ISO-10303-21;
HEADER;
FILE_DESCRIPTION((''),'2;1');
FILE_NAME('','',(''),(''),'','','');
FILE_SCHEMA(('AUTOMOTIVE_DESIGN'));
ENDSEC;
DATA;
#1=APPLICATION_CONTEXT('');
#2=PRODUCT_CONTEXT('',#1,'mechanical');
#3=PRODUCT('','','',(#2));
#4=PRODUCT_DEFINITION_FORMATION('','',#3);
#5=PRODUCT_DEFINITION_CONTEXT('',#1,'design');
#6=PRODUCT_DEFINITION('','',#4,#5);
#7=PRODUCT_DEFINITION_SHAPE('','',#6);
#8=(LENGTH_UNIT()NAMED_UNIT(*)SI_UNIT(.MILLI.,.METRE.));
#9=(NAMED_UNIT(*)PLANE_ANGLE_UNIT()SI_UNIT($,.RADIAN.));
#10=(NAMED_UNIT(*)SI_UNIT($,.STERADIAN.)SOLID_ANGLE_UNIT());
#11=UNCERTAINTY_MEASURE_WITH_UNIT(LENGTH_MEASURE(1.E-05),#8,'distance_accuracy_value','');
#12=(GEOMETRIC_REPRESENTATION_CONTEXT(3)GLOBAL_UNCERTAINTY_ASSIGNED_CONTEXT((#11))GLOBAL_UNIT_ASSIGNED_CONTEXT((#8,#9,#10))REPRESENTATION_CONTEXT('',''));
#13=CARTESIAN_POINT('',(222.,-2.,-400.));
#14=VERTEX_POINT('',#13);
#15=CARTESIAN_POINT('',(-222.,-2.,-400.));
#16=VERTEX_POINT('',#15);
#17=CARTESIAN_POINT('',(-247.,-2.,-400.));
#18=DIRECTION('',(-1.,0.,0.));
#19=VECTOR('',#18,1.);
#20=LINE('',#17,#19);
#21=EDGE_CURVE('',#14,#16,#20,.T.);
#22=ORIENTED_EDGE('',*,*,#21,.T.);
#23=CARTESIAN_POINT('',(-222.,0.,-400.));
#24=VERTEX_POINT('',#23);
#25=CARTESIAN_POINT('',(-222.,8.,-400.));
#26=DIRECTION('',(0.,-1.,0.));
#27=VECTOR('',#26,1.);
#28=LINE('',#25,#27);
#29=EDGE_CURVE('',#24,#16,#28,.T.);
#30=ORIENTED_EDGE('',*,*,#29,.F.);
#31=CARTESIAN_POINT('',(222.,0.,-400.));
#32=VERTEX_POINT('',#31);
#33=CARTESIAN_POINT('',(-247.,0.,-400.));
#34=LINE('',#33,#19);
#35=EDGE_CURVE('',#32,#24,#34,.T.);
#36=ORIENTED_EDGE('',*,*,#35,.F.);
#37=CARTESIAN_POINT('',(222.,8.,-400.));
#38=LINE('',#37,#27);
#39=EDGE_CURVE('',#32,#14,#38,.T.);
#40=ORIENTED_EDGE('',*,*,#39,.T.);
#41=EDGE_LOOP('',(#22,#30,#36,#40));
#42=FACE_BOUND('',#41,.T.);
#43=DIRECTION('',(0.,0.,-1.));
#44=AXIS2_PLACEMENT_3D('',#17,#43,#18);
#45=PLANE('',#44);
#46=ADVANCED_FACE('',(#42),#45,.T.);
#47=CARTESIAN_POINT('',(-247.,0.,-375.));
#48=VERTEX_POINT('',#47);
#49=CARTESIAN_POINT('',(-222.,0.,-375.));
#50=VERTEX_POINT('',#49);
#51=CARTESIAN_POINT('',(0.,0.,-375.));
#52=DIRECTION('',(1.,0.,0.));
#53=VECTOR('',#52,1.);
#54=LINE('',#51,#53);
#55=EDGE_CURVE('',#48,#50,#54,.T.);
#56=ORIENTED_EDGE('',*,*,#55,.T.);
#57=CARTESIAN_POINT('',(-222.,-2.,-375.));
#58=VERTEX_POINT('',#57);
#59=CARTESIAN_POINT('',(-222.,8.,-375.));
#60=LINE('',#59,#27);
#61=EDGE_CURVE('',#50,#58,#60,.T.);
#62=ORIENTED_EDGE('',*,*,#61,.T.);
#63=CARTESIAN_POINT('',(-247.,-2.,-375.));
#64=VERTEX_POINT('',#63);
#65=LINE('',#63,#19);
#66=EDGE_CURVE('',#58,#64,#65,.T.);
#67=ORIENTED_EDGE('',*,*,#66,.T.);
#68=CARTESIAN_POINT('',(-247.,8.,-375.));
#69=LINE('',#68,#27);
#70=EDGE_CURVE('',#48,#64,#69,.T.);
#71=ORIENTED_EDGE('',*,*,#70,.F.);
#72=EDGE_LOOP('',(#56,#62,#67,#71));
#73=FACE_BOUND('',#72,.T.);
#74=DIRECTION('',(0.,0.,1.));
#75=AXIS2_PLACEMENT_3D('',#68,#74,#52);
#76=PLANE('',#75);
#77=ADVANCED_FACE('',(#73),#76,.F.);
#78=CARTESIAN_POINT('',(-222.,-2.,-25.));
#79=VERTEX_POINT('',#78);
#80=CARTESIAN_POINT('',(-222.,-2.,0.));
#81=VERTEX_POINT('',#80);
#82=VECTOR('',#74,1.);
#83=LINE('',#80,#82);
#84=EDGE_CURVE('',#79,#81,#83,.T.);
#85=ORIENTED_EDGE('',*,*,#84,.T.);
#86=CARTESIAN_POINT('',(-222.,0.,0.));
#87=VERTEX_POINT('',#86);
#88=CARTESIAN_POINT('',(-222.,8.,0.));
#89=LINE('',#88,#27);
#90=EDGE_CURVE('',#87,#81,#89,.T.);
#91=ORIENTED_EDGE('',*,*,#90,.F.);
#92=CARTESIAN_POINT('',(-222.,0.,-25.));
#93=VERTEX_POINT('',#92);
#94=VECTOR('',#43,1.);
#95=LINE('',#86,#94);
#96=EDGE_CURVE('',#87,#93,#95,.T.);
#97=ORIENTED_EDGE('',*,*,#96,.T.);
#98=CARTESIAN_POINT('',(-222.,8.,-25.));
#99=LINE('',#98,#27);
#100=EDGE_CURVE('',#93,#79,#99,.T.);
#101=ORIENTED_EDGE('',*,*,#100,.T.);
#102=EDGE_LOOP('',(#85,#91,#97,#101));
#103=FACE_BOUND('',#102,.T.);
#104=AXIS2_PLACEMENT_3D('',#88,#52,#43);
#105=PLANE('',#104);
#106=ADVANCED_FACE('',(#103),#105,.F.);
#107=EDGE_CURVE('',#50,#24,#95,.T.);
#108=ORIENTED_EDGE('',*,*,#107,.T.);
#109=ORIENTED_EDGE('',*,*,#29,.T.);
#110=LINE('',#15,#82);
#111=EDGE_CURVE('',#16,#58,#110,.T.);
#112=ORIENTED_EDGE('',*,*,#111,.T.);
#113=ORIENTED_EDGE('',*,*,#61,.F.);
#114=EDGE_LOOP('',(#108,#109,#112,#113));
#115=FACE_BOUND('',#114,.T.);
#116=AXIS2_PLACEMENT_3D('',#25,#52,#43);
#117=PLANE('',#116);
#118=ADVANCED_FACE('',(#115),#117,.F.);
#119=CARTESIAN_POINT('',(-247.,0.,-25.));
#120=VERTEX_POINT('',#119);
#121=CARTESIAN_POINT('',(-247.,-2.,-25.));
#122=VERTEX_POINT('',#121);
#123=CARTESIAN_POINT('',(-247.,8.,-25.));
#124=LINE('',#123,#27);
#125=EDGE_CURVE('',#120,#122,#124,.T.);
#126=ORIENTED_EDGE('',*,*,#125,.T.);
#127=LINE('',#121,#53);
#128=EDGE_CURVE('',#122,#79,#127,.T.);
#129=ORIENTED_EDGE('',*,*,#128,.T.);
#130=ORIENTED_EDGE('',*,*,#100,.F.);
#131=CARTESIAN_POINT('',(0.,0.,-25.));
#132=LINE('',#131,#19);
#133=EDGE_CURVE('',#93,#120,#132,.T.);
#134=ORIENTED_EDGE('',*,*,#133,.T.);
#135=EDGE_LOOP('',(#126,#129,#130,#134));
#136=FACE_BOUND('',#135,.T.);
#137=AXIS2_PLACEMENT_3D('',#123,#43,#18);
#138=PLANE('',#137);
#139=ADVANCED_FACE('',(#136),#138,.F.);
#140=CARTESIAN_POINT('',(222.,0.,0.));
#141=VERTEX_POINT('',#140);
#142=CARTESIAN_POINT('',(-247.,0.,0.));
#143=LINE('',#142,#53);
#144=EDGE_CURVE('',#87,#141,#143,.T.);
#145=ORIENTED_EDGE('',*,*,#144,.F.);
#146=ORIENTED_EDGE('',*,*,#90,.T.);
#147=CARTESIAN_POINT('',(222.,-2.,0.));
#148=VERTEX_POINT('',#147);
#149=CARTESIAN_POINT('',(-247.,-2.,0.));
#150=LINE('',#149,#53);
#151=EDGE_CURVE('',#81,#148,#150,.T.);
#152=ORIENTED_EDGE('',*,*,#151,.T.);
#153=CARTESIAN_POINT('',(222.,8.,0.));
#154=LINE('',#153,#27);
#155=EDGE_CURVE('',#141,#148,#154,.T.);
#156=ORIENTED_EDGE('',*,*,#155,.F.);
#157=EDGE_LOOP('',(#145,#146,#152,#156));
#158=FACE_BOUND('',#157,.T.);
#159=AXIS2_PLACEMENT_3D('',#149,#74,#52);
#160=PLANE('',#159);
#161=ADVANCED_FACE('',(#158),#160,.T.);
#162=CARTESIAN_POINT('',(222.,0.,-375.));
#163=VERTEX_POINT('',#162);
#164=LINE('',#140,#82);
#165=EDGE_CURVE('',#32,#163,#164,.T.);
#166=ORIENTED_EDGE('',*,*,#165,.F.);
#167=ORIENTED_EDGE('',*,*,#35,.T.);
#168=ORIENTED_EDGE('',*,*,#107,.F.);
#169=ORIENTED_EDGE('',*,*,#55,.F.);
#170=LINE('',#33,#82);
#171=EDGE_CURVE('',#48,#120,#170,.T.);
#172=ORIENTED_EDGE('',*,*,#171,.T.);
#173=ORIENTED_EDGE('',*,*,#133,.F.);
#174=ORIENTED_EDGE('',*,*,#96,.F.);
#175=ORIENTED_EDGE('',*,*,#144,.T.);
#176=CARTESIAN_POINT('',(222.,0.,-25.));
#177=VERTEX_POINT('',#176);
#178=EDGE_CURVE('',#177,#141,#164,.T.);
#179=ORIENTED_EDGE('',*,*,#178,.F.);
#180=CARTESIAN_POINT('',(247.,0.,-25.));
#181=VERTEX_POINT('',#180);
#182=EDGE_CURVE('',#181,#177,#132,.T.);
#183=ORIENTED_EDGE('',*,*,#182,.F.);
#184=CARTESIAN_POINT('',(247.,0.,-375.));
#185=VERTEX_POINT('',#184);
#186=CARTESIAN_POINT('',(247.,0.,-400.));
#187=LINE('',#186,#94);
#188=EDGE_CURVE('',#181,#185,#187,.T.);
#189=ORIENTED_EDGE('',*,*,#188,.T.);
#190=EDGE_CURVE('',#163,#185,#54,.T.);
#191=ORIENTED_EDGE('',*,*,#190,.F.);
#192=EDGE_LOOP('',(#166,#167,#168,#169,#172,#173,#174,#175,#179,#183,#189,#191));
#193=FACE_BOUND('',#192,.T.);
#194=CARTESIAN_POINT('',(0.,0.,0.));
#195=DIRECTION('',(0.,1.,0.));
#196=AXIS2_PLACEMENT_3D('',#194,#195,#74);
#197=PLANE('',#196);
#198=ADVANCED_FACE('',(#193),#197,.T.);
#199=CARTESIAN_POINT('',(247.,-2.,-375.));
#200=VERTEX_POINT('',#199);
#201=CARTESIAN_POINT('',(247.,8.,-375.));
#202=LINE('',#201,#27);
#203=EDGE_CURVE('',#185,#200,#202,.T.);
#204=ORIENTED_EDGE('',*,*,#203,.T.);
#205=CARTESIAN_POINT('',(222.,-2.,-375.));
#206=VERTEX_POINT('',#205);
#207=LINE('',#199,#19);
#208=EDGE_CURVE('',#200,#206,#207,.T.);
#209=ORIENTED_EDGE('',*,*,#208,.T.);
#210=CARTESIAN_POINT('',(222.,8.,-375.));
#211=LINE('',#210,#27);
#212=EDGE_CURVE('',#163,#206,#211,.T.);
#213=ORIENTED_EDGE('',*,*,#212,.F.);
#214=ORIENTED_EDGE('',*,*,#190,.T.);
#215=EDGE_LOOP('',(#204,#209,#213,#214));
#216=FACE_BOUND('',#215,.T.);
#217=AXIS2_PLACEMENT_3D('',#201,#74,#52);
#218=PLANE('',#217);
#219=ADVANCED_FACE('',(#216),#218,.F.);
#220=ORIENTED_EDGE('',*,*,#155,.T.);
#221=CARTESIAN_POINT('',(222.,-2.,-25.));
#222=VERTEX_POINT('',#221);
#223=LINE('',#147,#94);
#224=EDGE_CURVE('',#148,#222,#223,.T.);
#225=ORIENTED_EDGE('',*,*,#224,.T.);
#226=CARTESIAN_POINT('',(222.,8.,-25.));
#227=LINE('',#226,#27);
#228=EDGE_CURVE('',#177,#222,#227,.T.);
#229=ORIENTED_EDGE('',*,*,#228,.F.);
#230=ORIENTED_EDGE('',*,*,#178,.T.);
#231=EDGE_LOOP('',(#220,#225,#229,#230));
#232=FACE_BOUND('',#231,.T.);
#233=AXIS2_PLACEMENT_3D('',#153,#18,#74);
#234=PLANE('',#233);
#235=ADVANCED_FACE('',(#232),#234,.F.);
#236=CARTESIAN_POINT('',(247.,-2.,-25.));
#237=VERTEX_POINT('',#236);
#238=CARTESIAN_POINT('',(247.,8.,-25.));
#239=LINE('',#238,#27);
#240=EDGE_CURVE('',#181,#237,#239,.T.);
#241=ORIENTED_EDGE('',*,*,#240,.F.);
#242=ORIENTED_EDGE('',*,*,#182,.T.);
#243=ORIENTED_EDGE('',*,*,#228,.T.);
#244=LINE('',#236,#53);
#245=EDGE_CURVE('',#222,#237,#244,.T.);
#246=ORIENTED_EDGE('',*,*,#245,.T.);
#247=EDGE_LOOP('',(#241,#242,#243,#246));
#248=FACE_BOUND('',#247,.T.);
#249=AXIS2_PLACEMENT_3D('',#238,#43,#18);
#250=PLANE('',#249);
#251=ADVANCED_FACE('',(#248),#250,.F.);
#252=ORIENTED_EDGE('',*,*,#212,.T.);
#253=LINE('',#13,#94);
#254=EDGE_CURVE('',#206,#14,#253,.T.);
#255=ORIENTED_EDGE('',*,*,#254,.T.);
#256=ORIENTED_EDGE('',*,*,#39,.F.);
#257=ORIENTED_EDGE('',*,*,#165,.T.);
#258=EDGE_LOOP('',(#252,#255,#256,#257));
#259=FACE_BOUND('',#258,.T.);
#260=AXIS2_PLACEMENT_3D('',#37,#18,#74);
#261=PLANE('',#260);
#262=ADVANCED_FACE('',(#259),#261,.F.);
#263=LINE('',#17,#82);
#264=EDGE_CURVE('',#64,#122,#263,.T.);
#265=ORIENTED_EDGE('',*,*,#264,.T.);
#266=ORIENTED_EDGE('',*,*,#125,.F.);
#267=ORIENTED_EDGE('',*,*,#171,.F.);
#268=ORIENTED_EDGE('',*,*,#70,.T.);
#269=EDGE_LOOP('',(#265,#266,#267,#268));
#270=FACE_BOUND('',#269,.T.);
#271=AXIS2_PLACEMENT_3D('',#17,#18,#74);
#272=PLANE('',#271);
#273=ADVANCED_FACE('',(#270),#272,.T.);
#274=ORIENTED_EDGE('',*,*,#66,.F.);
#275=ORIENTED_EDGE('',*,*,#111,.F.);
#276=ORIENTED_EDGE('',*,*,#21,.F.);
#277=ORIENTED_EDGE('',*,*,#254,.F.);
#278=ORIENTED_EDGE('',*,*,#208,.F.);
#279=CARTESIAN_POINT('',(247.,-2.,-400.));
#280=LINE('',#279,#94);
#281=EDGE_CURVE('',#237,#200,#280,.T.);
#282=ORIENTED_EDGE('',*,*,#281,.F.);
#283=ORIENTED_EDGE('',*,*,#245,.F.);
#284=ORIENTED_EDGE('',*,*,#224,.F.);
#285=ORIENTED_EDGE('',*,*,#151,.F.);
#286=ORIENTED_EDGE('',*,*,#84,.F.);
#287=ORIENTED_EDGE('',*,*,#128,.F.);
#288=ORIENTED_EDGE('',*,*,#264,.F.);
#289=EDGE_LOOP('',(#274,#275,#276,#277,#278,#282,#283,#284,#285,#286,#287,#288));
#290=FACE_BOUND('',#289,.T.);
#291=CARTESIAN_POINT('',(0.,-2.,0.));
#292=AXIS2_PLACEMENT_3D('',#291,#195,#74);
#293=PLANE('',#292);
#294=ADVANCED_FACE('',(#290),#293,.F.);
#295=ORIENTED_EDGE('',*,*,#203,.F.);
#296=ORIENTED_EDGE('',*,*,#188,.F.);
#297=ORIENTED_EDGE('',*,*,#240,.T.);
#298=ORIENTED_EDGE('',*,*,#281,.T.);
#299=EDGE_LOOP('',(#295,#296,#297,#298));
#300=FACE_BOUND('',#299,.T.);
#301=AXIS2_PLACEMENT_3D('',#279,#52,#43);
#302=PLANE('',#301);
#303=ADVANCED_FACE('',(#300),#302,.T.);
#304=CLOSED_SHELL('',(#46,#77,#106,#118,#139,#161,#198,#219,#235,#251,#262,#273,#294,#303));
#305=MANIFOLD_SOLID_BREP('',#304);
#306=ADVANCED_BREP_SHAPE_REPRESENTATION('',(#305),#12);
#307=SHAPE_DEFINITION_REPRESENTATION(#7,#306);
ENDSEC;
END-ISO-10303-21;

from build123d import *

# Parameters (mm, degrees)
IZIM1_W               = 494
IZIM1_H               = 400
TABAN_FLAN_1_DEPTH    = 2
IZIM6_W               = 25
IZIM6_H               = 25
KES_EKSTR_ZYON1_DEPTH = 10


# Sheet-metal steps are written as plain solids
with BuildPart() as part:
    # Çizim1 → Taban-Flanş1 (new body)
    with BuildSketch(Plane(origin=(0, 0, 0), x_dir=(1, 0, 0), z_dir=(0, 1, 0))):
        with Locations((0, 200)):
            Rectangle(IZIM1_W, IZIM1_H)
    extrude(amount=-TABAN_FLAN_1_DEPTH)

    # Çizim6 → Kes-Ekstrüzyon1 (cut)
    with BuildSketch(Plane.XZ.offset(2)):
        with Locations((-234.5, -12.5)):
            Rectangle(IZIM6_W, IZIM6_H)
        with Locations((234.5, -12.5)):
            Rectangle(IZIM6_W, IZIM6_H)
        with Locations((234.5, -387.5)):
            Rectangle(IZIM6_W, IZIM6_H)
        with Locations((-234.5, -387.5)):
            Rectangle(IZIM6_W, IZIM6_H)
    extrude(amount=-KES_EKSTR_ZYON1_DEPTH, mode=Mode.SUBTRACT)


solid = part.part
